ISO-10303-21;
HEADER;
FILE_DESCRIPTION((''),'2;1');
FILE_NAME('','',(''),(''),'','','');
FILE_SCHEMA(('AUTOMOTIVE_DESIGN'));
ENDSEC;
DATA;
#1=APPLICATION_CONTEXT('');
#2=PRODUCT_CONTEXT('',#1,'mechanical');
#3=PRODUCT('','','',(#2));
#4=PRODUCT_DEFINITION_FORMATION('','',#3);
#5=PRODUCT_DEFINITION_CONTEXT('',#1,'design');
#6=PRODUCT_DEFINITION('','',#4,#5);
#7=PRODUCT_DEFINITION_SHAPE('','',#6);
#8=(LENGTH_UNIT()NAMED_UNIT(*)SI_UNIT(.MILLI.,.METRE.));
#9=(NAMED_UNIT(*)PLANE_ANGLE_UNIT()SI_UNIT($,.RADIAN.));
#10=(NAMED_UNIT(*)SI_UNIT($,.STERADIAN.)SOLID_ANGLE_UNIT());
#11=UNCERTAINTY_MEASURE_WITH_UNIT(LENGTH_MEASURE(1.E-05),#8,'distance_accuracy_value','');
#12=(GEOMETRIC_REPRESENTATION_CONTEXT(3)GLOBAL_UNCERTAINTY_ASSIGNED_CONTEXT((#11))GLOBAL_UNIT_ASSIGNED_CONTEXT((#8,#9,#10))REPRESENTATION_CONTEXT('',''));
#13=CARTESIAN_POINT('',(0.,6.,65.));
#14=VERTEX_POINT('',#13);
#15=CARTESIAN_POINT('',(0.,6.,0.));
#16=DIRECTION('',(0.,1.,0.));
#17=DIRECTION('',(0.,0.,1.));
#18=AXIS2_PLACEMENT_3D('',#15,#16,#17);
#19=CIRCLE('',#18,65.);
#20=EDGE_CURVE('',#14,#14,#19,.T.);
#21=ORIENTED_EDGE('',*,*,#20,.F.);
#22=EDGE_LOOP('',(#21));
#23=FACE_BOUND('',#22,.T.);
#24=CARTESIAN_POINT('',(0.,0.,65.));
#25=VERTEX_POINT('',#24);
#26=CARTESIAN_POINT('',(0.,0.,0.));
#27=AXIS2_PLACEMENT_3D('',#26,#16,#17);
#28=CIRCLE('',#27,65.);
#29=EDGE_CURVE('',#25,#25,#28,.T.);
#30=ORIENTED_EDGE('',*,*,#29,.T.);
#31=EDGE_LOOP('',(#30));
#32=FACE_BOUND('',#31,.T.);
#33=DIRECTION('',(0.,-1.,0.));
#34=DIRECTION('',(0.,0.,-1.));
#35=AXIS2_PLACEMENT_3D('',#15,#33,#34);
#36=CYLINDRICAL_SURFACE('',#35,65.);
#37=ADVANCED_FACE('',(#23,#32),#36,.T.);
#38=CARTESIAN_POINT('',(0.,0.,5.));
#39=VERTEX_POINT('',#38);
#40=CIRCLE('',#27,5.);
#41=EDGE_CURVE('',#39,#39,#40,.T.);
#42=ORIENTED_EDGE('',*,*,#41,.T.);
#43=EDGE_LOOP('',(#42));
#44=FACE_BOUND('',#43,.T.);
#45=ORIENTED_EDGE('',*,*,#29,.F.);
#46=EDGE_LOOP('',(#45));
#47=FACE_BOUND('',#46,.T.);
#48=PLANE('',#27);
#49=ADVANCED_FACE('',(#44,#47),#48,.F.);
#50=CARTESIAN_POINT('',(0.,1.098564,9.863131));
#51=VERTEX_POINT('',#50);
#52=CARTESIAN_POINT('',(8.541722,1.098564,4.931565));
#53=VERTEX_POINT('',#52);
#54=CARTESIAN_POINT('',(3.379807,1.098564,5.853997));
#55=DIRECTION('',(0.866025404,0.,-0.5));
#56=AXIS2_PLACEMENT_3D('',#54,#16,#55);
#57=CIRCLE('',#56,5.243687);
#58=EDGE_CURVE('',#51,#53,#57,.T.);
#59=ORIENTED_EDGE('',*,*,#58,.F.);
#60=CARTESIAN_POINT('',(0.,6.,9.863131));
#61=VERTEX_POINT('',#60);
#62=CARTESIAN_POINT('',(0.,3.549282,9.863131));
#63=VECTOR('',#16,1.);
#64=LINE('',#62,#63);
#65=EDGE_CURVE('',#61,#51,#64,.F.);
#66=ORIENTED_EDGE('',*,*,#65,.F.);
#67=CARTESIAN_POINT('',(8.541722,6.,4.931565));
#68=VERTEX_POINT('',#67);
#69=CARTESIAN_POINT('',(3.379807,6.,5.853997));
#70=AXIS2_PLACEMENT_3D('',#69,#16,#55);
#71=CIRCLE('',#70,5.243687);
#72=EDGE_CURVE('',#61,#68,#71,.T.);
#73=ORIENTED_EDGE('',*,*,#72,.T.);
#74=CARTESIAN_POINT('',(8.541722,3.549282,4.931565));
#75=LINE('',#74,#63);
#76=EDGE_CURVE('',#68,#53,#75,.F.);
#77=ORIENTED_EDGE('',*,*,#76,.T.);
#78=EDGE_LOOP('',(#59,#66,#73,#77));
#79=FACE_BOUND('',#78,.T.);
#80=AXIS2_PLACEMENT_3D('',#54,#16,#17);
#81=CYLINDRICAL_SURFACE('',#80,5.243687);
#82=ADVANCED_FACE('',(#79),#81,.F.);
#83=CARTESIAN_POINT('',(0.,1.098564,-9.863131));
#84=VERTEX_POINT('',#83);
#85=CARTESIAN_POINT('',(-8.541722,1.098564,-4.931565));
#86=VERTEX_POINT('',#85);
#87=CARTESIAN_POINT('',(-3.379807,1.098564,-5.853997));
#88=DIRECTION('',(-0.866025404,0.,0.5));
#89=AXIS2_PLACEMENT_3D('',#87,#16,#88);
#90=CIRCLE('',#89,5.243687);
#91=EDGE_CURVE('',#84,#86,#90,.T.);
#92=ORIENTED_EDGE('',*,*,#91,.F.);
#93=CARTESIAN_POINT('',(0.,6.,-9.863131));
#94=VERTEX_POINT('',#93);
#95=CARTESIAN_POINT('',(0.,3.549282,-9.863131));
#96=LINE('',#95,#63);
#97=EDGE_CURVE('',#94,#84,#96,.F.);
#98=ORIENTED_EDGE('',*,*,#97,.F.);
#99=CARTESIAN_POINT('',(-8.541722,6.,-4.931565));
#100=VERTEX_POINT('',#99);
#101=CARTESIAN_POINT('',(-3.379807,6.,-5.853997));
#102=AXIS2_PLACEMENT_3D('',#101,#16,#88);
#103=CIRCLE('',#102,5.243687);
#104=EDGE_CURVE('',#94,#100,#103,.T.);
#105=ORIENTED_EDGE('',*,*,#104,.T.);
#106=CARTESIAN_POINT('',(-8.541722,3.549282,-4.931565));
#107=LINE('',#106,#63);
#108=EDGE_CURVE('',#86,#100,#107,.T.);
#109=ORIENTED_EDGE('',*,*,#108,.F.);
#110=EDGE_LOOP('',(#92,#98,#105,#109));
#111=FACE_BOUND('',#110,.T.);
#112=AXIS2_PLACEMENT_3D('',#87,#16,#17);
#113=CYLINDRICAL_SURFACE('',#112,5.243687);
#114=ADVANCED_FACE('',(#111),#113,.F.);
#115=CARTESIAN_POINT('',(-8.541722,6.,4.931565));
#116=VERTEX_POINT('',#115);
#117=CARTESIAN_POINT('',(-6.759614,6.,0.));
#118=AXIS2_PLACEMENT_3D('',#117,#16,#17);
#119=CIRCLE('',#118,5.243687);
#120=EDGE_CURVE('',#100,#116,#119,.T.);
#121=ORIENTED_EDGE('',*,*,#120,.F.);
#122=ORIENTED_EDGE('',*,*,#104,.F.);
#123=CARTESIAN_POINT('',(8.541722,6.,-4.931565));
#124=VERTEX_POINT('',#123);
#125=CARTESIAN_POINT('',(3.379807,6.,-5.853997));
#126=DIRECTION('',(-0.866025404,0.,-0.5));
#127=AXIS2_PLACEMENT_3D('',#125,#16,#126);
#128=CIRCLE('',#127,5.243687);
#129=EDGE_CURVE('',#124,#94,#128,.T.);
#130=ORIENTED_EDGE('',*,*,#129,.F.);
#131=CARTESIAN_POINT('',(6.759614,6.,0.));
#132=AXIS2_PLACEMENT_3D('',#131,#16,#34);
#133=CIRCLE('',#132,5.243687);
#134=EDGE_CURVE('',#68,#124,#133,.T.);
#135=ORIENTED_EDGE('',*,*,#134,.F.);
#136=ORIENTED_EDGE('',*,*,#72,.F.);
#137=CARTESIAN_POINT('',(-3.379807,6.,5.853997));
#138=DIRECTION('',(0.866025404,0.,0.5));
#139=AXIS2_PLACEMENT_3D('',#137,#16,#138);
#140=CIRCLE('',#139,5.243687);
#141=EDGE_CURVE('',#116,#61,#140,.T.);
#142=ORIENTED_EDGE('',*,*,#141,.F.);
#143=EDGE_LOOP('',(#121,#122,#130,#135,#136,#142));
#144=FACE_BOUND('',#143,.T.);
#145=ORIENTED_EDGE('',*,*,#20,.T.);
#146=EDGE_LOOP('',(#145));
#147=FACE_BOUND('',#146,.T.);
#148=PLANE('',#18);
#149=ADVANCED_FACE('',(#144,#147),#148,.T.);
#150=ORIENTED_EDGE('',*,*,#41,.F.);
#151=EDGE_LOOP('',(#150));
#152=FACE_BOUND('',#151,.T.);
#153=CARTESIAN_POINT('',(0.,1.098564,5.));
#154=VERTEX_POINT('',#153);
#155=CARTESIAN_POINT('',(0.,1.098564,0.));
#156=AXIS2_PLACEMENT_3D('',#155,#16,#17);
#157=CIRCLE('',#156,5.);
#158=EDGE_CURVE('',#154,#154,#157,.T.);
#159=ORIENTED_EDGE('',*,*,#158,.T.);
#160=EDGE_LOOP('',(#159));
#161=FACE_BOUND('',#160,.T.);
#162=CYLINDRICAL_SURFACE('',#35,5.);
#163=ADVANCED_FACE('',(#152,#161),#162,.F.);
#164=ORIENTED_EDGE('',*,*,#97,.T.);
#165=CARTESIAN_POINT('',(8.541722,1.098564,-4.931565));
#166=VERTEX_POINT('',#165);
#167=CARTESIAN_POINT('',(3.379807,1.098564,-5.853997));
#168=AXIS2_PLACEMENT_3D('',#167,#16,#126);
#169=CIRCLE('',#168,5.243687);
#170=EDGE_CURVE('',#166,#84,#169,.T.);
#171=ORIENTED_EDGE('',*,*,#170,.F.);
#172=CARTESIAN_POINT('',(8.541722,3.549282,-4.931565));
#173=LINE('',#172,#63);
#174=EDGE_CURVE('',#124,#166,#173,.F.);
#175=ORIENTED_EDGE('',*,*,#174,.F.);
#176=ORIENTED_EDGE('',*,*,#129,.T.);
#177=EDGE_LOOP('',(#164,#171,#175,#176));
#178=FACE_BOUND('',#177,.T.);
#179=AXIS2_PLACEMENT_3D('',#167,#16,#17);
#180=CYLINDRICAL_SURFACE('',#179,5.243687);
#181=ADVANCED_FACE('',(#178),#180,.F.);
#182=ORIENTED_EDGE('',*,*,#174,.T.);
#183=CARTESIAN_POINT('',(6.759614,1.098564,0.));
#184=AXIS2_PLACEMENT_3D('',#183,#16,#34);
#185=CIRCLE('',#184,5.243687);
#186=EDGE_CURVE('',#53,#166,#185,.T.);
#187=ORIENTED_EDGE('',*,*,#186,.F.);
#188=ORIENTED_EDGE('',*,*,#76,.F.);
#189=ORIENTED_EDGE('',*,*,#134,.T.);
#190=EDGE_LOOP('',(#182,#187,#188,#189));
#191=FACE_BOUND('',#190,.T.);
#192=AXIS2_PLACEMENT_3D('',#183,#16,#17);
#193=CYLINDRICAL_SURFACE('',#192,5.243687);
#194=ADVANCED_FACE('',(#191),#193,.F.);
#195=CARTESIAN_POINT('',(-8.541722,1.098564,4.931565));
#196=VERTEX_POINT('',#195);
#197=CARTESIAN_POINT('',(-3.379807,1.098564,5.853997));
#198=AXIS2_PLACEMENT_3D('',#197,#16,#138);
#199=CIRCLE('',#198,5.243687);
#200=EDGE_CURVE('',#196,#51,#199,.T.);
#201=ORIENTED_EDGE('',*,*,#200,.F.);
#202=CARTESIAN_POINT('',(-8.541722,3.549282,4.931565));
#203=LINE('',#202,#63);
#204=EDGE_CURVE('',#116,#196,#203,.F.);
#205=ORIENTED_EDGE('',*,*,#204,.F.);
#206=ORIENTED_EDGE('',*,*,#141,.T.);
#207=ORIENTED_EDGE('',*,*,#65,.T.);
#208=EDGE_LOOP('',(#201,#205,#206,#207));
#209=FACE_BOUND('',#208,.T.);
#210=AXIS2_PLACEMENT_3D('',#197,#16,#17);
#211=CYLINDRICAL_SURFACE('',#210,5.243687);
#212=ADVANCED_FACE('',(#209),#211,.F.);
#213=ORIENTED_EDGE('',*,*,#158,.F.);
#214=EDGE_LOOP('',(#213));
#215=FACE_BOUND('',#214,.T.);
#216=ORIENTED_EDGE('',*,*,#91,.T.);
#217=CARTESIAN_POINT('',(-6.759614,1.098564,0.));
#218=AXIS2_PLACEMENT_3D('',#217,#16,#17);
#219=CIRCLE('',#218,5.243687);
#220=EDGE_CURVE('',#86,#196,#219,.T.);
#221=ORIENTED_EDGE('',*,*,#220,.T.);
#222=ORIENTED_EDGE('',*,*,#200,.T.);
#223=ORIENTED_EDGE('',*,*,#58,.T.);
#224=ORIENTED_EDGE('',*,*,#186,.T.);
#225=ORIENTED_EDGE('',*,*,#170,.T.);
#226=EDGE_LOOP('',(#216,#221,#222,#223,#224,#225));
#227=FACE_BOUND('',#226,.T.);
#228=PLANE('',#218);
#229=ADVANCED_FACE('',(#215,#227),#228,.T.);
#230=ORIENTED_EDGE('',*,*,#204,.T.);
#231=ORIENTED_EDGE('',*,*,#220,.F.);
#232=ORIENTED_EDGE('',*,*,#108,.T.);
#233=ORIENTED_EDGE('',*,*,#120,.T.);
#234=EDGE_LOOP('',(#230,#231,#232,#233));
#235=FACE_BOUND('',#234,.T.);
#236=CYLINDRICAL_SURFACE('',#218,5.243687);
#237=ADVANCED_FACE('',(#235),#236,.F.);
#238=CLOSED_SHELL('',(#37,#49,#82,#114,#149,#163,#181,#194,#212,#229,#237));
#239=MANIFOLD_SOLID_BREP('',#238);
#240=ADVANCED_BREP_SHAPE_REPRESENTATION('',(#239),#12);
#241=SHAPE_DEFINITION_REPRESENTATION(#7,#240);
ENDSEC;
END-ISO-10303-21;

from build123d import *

# Parameters (mm, degrees)
SKETCH1_R           = 65
BOSS_EXTRUDE1_DEPTH = 6
SKETCH2_R           = 5
CUT_EXTRUDE1_DEPTH  = 93.119487623
SKETCH3_R           = 5.243686523
CUT_EXTRUDE2_DEPTH  = 4.90143592
CIRPATTERN1_COUNT   = 6


with BuildPart() as part:
    # Sketch1 → Boss-Extrude1 (new body)
    with BuildSketch(Plane(origin=(0, 0, 0), x_dir=(1, 0, 0), z_dir=(0, 1, 0))):
        Circle(SKETCH1_R)
    extrude(amount=BOSS_EXTRUDE1_DEPTH)

    # Sketch2 → Cut-Extrude1 (cut, through all)
    with BuildSketch(Plane(origin=(0, 0, 0), x_dir=(1, 0, 0), z_dir=(0, 1, 0))):
        Circle(SKETCH2_R)
    extrude(amount=CUT_EXTRUDE1_DEPTH, mode=Mode.SUBTRACT)

    # Sketch3 → Cut-Extrude2 (cut)
    with BuildSketch(Plane(origin=(0, 6, 0), x_dir=(1, 0, 0), z_dir=(0, 1, 0))):
        with Locations((-6.759613597, 0)):
            Circle(SKETCH3_R)
    cut_extrude2 = extrude(amount=-CUT_EXTRUDE2_DEPTH, mode=Mode.SUBTRACT)

    # CirPattern1: Cut-Extrude2 ×6 about axis
    cirpattern1_axis = Axis((0, 0, 0), (0, 1, 0))
    for i in range(1, CIRPATTERN1_COUNT):
        add(cut_extrude2.rotate(cirpattern1_axis, i * 360 / CIRPATTERN1_COUNT), mode=Mode.SUBTRACT)


solid = part.part
